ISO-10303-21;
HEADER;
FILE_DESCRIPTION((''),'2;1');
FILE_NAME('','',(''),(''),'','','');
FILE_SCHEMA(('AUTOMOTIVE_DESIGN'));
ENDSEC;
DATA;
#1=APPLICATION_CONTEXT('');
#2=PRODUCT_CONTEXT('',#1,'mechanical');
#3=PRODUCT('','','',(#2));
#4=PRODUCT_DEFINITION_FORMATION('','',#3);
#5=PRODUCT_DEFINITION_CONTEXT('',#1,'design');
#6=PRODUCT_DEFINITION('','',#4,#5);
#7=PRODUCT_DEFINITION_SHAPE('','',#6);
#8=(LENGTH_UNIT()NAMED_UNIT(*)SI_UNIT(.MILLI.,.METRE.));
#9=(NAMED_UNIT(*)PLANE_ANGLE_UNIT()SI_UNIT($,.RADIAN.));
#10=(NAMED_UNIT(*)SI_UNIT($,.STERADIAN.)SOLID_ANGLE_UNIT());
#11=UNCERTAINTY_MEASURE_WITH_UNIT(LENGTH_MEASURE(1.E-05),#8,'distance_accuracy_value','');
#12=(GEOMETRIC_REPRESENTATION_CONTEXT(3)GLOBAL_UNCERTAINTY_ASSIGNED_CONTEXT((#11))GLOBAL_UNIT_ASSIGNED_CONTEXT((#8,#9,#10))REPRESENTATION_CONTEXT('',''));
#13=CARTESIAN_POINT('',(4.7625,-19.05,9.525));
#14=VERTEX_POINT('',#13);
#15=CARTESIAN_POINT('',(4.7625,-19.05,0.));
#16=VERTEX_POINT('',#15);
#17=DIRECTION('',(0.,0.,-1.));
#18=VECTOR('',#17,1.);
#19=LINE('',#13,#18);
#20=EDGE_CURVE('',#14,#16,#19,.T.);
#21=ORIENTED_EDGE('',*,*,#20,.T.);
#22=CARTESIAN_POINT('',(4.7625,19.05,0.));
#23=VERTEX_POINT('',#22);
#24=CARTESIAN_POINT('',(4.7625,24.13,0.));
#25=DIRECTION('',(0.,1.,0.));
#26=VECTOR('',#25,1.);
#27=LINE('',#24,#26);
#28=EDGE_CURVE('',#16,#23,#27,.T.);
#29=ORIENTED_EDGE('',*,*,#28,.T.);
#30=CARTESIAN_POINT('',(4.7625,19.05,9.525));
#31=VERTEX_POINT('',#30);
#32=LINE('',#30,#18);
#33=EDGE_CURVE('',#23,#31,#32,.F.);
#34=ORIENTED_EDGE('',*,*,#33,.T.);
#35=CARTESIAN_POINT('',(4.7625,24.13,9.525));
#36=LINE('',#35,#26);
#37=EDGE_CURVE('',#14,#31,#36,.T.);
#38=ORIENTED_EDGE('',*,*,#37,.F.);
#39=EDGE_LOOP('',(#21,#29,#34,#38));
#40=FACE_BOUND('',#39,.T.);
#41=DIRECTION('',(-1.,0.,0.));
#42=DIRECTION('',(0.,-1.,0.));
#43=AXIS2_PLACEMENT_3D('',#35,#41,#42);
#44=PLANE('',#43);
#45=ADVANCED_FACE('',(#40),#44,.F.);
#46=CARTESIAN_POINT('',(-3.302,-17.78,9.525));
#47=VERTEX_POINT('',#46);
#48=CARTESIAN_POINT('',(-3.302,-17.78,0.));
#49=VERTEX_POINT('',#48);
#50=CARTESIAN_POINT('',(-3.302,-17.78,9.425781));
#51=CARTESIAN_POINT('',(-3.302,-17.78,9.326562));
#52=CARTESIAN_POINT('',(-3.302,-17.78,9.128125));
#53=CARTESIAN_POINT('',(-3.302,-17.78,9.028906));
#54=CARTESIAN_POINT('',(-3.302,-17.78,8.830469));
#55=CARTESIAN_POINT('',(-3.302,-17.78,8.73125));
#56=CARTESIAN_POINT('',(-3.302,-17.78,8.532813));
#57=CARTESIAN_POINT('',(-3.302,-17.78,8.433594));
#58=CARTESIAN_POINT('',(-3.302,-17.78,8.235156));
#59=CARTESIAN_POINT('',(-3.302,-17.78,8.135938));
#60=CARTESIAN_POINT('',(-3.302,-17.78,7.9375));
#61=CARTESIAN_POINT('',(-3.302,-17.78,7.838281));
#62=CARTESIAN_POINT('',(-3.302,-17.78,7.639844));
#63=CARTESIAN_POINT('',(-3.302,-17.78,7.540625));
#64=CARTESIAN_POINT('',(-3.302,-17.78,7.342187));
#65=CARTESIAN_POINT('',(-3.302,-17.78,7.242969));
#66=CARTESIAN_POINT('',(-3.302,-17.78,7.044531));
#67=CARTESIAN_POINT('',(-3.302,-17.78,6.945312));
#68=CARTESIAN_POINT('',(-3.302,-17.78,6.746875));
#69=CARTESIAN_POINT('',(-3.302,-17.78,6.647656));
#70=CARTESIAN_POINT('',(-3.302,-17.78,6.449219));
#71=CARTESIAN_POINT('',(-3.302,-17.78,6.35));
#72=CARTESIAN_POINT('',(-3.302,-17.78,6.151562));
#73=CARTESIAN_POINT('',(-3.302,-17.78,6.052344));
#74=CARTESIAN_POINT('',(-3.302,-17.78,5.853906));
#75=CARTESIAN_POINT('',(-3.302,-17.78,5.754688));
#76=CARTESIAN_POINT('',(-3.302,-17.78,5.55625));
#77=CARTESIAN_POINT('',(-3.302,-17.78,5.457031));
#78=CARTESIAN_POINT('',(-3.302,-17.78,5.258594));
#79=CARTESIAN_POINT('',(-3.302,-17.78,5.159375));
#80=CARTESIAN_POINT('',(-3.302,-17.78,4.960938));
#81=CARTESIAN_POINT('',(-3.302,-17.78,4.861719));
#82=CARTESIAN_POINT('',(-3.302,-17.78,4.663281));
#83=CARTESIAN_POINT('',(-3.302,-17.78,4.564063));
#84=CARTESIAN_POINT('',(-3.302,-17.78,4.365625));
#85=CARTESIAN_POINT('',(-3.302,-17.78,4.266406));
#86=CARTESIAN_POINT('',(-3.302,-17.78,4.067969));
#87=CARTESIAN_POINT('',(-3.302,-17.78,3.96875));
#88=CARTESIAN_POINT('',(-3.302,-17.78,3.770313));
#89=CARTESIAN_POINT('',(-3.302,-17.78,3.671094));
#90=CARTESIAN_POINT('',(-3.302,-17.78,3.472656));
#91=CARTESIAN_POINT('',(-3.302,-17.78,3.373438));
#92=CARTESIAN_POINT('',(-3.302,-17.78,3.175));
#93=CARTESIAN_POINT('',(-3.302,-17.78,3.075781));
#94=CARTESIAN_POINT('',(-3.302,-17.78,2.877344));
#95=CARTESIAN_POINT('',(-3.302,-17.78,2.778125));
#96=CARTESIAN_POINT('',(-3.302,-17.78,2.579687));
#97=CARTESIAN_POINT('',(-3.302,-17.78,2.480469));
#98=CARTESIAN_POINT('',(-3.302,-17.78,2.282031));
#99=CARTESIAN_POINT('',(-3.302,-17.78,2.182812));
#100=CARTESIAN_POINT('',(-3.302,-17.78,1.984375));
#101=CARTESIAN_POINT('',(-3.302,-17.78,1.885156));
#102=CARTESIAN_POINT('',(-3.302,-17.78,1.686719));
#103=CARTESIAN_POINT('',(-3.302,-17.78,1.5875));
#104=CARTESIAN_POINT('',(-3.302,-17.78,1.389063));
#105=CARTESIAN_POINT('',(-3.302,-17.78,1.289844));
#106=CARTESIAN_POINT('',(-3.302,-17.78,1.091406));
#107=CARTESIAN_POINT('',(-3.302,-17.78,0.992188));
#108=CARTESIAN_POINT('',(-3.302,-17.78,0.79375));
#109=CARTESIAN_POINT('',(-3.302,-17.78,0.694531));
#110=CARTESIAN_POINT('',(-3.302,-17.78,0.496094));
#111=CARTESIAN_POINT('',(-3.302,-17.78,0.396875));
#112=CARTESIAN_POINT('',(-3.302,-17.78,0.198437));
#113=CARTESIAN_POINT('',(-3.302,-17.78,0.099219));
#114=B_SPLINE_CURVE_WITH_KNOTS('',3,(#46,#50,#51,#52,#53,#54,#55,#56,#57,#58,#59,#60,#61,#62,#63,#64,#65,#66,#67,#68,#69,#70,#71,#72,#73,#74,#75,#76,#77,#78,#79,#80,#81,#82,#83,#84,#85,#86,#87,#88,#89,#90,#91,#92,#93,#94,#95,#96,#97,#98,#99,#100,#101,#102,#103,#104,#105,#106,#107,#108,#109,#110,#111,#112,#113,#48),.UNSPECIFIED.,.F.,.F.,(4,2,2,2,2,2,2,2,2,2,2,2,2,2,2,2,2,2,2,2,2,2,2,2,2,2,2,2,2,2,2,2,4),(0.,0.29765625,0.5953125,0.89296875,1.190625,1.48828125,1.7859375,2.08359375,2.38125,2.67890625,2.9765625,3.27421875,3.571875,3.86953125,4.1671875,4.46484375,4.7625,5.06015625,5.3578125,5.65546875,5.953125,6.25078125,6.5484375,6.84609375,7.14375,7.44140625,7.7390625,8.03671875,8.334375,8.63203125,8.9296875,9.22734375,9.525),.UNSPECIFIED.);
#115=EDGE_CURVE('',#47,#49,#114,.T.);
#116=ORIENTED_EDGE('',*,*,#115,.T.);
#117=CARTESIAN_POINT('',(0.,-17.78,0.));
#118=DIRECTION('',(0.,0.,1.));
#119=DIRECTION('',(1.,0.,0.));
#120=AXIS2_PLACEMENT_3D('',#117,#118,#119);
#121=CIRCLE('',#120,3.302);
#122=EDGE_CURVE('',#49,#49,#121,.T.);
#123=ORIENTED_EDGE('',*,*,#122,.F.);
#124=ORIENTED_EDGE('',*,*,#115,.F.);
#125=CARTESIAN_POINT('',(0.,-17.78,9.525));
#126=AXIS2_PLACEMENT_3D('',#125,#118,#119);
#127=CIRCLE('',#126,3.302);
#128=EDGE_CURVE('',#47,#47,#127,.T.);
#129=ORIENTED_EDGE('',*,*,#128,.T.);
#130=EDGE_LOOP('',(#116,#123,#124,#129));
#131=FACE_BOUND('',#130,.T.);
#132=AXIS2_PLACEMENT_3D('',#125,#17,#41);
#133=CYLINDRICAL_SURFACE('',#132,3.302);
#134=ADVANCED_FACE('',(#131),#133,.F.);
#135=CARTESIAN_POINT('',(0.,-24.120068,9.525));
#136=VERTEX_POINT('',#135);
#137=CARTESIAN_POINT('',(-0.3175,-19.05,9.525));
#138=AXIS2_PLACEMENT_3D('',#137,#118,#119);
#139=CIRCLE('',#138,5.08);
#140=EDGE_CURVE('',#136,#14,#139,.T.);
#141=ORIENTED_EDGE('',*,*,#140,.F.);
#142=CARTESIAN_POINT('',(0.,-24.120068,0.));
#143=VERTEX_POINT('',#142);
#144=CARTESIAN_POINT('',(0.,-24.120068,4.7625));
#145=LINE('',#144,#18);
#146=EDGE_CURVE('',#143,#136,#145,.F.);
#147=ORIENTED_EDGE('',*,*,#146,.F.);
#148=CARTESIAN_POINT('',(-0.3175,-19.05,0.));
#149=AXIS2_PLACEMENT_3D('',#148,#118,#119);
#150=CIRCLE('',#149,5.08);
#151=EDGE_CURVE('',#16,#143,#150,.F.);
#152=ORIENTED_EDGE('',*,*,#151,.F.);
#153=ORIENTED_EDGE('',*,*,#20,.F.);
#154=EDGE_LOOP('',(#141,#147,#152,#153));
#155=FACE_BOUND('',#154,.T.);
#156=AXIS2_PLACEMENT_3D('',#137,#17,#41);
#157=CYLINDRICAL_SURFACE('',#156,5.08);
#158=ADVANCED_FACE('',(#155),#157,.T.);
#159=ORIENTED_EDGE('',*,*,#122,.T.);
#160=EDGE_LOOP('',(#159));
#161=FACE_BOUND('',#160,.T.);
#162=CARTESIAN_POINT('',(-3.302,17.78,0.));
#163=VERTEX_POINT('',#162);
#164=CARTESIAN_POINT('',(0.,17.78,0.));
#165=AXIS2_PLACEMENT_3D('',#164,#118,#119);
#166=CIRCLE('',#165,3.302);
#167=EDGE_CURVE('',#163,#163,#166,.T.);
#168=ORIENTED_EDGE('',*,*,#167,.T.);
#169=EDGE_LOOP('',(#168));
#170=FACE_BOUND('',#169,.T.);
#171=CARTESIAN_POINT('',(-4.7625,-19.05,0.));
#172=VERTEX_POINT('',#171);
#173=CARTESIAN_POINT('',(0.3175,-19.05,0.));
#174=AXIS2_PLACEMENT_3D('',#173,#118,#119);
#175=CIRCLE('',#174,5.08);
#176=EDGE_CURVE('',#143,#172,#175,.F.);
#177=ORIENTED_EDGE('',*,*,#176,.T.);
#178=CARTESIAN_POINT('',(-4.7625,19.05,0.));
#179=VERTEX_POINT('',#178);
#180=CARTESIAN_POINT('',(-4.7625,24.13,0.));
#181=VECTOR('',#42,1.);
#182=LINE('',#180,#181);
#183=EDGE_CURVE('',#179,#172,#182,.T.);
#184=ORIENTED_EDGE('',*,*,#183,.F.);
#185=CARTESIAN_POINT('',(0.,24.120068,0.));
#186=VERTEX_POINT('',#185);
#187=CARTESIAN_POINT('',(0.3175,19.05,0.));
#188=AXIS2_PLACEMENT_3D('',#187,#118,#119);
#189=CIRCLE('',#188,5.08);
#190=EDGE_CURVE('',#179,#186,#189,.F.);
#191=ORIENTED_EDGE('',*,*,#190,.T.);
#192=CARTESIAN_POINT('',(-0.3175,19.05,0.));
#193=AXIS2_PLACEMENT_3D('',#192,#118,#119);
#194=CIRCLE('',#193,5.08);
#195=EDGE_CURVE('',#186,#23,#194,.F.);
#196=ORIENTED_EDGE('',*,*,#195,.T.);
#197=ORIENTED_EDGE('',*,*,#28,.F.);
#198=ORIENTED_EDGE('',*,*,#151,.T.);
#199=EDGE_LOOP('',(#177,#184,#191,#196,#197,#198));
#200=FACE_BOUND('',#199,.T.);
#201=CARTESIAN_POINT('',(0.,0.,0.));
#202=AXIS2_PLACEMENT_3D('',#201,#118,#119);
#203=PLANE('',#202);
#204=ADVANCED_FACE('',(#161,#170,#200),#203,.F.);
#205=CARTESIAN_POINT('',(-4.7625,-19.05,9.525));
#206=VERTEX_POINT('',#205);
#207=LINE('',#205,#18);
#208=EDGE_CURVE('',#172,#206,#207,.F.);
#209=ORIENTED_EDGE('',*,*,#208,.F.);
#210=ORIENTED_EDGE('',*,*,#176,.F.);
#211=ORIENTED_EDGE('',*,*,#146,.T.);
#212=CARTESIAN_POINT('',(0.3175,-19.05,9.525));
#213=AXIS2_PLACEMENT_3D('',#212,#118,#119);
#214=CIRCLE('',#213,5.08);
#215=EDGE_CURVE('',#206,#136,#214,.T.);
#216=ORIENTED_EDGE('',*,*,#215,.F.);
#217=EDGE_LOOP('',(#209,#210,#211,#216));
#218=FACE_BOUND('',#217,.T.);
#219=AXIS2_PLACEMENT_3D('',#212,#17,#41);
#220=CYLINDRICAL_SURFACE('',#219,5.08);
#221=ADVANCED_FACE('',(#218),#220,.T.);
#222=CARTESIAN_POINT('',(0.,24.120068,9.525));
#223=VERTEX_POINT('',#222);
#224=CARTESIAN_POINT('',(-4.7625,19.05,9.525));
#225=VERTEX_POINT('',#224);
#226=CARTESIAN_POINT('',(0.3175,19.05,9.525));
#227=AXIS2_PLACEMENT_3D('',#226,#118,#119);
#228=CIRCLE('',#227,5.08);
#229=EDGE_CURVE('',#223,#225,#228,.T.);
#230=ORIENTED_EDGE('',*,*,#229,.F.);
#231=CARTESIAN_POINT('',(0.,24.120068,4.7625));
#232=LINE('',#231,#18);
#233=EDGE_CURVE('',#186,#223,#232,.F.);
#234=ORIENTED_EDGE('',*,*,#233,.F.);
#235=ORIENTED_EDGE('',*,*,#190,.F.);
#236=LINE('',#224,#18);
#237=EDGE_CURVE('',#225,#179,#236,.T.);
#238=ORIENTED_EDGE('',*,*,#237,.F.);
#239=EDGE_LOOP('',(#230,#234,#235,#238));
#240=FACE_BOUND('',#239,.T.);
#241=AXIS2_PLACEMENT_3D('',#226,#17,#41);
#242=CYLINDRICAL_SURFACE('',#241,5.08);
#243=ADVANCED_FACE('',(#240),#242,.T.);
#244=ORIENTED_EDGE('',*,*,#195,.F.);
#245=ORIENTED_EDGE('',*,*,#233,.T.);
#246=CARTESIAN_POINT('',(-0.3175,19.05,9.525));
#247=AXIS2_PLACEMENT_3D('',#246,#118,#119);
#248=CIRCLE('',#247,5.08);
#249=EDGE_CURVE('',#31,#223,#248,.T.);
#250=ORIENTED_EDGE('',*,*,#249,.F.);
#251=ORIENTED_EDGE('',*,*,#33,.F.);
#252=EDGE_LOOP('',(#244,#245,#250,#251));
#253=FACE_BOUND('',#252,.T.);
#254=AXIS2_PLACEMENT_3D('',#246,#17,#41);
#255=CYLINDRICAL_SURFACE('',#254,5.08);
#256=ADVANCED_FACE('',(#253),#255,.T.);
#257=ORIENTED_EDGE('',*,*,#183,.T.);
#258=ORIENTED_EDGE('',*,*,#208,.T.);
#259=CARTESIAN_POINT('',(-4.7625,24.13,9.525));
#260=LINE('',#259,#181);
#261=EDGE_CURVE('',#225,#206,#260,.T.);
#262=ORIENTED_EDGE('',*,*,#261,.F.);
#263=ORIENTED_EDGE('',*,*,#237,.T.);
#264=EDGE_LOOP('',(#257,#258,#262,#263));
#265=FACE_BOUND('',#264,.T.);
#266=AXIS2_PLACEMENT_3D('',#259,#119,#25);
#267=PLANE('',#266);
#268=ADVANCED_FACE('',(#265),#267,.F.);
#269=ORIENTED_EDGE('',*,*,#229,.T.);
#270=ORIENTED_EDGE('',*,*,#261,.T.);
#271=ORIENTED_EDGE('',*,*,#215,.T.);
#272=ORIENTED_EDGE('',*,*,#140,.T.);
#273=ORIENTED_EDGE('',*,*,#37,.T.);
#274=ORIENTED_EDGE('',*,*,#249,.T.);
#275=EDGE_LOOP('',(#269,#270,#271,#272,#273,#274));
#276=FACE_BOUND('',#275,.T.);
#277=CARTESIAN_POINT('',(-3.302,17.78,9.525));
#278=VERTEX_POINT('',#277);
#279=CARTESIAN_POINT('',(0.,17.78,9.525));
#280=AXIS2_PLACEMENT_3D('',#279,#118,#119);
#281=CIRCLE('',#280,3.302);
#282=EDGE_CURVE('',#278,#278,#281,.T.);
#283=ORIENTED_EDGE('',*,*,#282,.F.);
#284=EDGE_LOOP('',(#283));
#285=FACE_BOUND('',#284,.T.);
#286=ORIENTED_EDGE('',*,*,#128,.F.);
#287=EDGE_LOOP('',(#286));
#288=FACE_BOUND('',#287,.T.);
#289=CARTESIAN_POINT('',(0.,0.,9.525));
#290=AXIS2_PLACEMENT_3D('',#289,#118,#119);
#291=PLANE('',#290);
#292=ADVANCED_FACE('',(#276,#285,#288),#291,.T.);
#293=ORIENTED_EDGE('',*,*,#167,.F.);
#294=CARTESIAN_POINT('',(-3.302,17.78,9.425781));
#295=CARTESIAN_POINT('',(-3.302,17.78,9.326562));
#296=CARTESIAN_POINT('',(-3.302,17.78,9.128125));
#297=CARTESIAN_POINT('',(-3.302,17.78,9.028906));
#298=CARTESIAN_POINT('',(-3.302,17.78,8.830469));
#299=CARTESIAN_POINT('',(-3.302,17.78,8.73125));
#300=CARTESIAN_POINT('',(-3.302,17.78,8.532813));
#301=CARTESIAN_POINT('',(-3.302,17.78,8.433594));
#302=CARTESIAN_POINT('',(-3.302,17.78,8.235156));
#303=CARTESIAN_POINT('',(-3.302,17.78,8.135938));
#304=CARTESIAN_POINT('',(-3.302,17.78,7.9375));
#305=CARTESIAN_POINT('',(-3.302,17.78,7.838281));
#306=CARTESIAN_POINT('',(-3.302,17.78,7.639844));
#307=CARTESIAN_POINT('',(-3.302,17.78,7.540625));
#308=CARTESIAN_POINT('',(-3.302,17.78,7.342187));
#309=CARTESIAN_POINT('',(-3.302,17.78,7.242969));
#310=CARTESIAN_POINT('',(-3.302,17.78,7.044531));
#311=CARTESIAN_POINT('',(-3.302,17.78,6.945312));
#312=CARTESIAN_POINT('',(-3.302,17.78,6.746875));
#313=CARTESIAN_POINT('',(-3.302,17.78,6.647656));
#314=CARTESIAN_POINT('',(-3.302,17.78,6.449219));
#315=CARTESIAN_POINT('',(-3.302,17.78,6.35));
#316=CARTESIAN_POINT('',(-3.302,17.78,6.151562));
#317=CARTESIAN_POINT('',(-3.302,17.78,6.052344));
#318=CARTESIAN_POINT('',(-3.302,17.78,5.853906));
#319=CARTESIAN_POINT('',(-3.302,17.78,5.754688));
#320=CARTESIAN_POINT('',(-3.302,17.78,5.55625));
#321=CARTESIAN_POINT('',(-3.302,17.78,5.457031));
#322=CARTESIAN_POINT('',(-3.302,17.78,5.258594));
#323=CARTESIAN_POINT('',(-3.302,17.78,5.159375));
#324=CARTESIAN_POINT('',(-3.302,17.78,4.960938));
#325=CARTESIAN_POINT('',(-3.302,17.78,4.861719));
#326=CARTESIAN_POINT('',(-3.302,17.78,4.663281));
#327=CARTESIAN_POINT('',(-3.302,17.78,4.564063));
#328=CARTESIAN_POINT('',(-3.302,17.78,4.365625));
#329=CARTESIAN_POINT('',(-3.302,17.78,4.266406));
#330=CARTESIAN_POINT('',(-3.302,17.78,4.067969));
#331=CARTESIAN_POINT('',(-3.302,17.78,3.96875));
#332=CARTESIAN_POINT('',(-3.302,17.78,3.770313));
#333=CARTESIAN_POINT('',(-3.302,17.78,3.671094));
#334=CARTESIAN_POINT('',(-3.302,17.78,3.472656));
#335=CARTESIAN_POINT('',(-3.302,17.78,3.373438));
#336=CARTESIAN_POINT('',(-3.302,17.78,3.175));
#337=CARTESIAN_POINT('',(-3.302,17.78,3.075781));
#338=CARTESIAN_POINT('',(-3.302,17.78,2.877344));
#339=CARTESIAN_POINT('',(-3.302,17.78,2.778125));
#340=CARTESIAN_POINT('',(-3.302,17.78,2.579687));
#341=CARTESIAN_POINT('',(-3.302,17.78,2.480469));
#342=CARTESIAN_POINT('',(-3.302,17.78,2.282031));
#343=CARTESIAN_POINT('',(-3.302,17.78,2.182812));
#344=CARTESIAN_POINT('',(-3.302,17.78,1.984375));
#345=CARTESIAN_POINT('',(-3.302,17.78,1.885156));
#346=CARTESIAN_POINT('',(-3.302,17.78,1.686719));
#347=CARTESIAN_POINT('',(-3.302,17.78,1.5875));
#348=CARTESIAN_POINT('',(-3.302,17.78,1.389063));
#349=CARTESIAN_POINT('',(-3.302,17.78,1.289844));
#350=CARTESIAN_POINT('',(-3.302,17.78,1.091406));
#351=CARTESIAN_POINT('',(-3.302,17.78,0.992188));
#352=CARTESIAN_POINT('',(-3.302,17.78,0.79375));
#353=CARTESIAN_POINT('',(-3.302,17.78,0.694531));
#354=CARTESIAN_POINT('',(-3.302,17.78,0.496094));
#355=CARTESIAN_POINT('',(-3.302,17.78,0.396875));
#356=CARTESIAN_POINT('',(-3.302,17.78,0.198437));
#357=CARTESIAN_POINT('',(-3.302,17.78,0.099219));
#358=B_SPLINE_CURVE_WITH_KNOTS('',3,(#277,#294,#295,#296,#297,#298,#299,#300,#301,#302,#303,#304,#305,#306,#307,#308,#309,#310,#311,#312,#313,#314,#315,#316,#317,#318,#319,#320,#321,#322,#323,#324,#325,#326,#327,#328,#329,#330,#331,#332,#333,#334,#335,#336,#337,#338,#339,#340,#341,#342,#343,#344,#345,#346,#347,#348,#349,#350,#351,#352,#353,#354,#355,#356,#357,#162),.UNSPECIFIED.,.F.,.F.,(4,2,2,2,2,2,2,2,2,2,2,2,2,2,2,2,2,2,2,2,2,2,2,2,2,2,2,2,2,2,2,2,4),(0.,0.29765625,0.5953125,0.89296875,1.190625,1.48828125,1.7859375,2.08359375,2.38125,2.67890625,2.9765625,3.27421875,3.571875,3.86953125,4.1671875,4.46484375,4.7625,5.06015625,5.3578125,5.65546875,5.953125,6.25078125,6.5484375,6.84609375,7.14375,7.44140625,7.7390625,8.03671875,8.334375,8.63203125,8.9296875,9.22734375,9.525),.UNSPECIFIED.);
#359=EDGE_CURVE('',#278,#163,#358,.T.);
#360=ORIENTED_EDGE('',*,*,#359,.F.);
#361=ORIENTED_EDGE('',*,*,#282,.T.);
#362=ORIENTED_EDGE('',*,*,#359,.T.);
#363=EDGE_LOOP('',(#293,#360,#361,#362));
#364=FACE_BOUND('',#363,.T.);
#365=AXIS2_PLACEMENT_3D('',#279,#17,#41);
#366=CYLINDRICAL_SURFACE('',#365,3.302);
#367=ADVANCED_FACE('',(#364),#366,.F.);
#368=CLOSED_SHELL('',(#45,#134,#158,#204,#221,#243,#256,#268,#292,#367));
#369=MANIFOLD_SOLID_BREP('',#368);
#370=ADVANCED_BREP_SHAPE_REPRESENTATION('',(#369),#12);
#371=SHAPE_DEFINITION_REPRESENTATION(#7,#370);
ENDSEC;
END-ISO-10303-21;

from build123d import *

# Parameters (mm, degrees)
SKETCH1_W           = 9.525
SKETCH1_H           = 48.26
SKETCH1_R           = 3.302
BOSS_EXTRUDE1_DEPTH = 9.525
FILLET1_R           = 5.08


with BuildPart() as part:
    # Sketch1 → Boss-Extrude1 (new body)
    with BuildSketch(Plane.XY):
        Rectangle(SKETCH1_W, SKETCH1_H)
        with Locations(Location((0, -17.78, 0), (0, 0, 180))):
            Circle(SKETCH1_R, mode=Mode.SUBTRACT)
        with Locations(Location((0, 17.78, 0), (0, 0, 180))):
            Circle(SKETCH1_R, mode=Mode.SUBTRACT)
    extrude(amount=BOSS_EXTRUDE1_DEPTH)

    # Fillet1
    # the kernel refuses this fillet: 5.08 mm, written as the material it takes off along each edge
    with BuildSketch(Plane(origin=(-4.7625, -24.13, -12.7), x_dir=(1, 0, 0), z_dir=(0, 0, 1)), Plane(origin=(4.7625, -24.13, -12.7), x_dir=(0, 1, 0), z_dir=(0, 0, 1)), Plane(origin=(4.7625, 24.13, -12.7), x_dir=(-1, 0, 0), z_dir=(0, 0, 1))) as fillet1_piece_1:
        with BuildLine():
            CenterArc((FILLET1_R, FILLET1_R), FILLET1_R, 180, 90)
            Line((0, FILLET1_R), (0, 0))
            Line((0, 0), (FILLET1_R, 0))
        make_face()
    extrude(amount=34.925, mode=Mode.SUBTRACT)
    with BuildSketch(Plane(origin=(-4.7625, 24.13, -12.7), x_dir=(1, 0, 0), z_dir=(0, 0, 1))) as fillet1_piece_2:
        with BuildLine():
            CenterArc((FILLET1_R, -FILLET1_R), FILLET1_R, 90, 90)
            Line((0, -FILLET1_R), (0, 0))
            Line((0, 0), (FILLET1_R, 0))
        make_face()
    extrude(amount=34.925, mode=Mode.SUBTRACT)


solid = part.part
